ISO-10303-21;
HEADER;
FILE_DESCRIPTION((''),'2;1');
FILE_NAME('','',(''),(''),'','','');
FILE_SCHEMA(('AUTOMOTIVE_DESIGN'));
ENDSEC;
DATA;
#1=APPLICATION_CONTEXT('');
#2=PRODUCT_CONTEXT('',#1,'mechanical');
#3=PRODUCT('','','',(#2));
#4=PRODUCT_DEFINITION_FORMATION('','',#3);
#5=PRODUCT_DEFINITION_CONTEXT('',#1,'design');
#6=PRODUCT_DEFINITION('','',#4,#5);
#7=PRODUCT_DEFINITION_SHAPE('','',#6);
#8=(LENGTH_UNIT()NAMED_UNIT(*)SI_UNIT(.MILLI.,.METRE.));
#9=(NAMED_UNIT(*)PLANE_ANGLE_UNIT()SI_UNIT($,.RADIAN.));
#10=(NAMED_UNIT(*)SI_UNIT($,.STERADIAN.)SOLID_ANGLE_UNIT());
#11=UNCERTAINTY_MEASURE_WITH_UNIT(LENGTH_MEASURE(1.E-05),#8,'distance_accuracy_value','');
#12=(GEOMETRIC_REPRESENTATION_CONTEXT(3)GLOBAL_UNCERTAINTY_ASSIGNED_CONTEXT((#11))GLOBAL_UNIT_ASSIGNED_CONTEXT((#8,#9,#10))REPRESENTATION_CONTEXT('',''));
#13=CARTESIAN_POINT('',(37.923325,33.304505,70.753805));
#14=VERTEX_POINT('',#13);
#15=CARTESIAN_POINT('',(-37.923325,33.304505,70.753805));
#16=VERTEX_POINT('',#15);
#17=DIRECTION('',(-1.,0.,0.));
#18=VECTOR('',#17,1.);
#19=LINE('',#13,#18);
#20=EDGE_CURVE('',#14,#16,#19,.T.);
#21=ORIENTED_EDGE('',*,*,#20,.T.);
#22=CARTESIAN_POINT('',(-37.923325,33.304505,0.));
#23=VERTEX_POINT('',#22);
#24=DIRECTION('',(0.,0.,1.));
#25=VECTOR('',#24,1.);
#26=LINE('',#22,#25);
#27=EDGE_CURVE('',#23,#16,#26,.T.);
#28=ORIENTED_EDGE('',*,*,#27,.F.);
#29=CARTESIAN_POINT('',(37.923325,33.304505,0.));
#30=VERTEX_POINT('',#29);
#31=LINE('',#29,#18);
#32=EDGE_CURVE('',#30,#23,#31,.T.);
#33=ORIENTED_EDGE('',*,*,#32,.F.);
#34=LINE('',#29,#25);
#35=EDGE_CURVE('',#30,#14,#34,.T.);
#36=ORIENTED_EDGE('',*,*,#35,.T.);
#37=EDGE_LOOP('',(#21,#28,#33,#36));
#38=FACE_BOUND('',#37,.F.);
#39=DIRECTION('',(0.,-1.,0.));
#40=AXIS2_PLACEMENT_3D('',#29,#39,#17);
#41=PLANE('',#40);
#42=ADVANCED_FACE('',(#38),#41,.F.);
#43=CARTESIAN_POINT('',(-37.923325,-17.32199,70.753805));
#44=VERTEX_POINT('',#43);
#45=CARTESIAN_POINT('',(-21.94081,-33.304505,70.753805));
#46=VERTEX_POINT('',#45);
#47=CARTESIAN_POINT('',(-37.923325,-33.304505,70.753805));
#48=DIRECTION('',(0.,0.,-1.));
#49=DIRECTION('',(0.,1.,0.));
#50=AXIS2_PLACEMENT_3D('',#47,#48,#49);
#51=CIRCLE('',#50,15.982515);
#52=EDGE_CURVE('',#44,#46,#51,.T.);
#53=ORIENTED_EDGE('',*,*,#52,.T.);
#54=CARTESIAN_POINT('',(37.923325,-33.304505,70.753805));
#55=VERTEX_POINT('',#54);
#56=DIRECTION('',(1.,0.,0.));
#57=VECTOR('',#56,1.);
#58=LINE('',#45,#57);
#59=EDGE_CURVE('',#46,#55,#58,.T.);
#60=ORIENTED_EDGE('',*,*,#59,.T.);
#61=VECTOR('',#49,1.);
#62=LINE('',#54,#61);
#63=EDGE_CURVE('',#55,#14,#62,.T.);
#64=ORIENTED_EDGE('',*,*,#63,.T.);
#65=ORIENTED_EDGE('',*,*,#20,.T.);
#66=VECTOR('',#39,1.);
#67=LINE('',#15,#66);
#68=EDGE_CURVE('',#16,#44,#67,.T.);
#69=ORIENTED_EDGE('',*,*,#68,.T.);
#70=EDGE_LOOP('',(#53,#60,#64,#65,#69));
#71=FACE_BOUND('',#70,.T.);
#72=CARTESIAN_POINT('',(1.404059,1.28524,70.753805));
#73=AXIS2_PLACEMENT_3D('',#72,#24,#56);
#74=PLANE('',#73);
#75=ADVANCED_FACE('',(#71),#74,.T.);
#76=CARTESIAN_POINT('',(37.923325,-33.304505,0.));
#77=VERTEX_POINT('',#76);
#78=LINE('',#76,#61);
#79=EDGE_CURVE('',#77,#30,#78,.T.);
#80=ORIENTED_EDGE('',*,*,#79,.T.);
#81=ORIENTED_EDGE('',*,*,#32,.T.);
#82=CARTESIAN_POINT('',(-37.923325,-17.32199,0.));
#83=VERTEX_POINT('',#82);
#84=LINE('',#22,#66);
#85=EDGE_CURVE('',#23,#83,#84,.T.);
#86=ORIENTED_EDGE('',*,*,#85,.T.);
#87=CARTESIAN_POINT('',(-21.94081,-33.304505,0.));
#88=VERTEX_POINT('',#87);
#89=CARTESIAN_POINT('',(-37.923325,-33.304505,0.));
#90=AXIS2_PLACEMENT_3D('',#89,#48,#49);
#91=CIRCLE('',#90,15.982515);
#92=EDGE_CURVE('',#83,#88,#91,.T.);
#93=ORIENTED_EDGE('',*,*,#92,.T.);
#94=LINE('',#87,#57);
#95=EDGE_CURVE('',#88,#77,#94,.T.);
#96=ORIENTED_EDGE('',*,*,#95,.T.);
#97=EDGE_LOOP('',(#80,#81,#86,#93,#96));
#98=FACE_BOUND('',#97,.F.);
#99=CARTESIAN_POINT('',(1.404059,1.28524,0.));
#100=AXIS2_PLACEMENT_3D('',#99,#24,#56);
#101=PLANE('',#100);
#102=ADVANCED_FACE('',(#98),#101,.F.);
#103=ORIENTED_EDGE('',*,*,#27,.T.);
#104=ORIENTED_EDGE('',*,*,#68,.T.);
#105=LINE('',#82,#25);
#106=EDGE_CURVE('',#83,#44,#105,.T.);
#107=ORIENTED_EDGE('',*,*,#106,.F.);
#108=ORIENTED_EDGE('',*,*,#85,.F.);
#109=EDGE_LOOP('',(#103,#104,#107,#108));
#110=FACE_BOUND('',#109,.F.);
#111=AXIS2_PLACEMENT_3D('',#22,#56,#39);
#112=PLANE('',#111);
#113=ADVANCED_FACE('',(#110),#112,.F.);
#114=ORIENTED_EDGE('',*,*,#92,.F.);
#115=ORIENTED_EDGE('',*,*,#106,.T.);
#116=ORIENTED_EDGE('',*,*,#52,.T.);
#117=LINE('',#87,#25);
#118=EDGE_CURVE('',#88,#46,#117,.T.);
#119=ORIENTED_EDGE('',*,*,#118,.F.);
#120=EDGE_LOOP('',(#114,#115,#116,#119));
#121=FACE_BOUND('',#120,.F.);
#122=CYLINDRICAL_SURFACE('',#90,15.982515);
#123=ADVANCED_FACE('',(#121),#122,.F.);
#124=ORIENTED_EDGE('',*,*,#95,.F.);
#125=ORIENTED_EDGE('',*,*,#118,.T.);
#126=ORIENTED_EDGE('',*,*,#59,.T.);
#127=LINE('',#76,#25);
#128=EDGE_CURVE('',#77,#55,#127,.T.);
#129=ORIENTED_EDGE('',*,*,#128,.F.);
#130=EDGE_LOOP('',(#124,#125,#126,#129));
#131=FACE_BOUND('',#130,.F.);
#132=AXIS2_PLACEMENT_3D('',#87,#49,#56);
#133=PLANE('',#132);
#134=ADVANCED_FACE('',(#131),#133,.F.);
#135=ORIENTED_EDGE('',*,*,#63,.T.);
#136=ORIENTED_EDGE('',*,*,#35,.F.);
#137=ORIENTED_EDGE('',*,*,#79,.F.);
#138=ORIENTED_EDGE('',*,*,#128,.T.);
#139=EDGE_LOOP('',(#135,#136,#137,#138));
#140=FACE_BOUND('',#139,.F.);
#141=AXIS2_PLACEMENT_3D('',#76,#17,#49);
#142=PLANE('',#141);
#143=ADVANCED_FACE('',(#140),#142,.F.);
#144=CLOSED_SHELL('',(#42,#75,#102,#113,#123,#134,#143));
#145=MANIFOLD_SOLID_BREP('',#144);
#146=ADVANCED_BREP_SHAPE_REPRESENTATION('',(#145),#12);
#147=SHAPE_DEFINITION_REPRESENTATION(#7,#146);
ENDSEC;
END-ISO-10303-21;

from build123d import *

# Parameters (mm, degrees)
F2_DEPTH = 70.7538053393


# Not quite as in the source:
# - a feature names something its author has since deleted; it is built from what else it names


with BuildPart() as f2:
    # F0 (on Top) → F2 (new body, through all)
    with BuildSketch(Plane.XY):
        with BuildLine():
            Line((37.9233248532, 33.3045050502), (-37.9233248532, 33.3045050502))
            Line((-37.9233248532, 33.3045050502), (-37.9233248532, -17.321989961))
            ThreePointArc((-37.9233248532, -17.321989961), (-26.6219800532, -22.0031602502), (-21.940809764, -33.3045050502))
            Line((-21.940809764, -33.3045050502), (37.9233248532, -33.3045050502))
            Line((37.9233248532, -33.3045050502), (37.9233248532, -14.8748438805))
            Line((37.9233248532, -14.8748438805), (37.9233248532, 16.9966574758))
            Line((37.9233248532, 16.9966574758), (37.9233248532, 33.3045050502))
        make_face()
    extrude(amount=F2_DEPTH)


solid = f2.part
